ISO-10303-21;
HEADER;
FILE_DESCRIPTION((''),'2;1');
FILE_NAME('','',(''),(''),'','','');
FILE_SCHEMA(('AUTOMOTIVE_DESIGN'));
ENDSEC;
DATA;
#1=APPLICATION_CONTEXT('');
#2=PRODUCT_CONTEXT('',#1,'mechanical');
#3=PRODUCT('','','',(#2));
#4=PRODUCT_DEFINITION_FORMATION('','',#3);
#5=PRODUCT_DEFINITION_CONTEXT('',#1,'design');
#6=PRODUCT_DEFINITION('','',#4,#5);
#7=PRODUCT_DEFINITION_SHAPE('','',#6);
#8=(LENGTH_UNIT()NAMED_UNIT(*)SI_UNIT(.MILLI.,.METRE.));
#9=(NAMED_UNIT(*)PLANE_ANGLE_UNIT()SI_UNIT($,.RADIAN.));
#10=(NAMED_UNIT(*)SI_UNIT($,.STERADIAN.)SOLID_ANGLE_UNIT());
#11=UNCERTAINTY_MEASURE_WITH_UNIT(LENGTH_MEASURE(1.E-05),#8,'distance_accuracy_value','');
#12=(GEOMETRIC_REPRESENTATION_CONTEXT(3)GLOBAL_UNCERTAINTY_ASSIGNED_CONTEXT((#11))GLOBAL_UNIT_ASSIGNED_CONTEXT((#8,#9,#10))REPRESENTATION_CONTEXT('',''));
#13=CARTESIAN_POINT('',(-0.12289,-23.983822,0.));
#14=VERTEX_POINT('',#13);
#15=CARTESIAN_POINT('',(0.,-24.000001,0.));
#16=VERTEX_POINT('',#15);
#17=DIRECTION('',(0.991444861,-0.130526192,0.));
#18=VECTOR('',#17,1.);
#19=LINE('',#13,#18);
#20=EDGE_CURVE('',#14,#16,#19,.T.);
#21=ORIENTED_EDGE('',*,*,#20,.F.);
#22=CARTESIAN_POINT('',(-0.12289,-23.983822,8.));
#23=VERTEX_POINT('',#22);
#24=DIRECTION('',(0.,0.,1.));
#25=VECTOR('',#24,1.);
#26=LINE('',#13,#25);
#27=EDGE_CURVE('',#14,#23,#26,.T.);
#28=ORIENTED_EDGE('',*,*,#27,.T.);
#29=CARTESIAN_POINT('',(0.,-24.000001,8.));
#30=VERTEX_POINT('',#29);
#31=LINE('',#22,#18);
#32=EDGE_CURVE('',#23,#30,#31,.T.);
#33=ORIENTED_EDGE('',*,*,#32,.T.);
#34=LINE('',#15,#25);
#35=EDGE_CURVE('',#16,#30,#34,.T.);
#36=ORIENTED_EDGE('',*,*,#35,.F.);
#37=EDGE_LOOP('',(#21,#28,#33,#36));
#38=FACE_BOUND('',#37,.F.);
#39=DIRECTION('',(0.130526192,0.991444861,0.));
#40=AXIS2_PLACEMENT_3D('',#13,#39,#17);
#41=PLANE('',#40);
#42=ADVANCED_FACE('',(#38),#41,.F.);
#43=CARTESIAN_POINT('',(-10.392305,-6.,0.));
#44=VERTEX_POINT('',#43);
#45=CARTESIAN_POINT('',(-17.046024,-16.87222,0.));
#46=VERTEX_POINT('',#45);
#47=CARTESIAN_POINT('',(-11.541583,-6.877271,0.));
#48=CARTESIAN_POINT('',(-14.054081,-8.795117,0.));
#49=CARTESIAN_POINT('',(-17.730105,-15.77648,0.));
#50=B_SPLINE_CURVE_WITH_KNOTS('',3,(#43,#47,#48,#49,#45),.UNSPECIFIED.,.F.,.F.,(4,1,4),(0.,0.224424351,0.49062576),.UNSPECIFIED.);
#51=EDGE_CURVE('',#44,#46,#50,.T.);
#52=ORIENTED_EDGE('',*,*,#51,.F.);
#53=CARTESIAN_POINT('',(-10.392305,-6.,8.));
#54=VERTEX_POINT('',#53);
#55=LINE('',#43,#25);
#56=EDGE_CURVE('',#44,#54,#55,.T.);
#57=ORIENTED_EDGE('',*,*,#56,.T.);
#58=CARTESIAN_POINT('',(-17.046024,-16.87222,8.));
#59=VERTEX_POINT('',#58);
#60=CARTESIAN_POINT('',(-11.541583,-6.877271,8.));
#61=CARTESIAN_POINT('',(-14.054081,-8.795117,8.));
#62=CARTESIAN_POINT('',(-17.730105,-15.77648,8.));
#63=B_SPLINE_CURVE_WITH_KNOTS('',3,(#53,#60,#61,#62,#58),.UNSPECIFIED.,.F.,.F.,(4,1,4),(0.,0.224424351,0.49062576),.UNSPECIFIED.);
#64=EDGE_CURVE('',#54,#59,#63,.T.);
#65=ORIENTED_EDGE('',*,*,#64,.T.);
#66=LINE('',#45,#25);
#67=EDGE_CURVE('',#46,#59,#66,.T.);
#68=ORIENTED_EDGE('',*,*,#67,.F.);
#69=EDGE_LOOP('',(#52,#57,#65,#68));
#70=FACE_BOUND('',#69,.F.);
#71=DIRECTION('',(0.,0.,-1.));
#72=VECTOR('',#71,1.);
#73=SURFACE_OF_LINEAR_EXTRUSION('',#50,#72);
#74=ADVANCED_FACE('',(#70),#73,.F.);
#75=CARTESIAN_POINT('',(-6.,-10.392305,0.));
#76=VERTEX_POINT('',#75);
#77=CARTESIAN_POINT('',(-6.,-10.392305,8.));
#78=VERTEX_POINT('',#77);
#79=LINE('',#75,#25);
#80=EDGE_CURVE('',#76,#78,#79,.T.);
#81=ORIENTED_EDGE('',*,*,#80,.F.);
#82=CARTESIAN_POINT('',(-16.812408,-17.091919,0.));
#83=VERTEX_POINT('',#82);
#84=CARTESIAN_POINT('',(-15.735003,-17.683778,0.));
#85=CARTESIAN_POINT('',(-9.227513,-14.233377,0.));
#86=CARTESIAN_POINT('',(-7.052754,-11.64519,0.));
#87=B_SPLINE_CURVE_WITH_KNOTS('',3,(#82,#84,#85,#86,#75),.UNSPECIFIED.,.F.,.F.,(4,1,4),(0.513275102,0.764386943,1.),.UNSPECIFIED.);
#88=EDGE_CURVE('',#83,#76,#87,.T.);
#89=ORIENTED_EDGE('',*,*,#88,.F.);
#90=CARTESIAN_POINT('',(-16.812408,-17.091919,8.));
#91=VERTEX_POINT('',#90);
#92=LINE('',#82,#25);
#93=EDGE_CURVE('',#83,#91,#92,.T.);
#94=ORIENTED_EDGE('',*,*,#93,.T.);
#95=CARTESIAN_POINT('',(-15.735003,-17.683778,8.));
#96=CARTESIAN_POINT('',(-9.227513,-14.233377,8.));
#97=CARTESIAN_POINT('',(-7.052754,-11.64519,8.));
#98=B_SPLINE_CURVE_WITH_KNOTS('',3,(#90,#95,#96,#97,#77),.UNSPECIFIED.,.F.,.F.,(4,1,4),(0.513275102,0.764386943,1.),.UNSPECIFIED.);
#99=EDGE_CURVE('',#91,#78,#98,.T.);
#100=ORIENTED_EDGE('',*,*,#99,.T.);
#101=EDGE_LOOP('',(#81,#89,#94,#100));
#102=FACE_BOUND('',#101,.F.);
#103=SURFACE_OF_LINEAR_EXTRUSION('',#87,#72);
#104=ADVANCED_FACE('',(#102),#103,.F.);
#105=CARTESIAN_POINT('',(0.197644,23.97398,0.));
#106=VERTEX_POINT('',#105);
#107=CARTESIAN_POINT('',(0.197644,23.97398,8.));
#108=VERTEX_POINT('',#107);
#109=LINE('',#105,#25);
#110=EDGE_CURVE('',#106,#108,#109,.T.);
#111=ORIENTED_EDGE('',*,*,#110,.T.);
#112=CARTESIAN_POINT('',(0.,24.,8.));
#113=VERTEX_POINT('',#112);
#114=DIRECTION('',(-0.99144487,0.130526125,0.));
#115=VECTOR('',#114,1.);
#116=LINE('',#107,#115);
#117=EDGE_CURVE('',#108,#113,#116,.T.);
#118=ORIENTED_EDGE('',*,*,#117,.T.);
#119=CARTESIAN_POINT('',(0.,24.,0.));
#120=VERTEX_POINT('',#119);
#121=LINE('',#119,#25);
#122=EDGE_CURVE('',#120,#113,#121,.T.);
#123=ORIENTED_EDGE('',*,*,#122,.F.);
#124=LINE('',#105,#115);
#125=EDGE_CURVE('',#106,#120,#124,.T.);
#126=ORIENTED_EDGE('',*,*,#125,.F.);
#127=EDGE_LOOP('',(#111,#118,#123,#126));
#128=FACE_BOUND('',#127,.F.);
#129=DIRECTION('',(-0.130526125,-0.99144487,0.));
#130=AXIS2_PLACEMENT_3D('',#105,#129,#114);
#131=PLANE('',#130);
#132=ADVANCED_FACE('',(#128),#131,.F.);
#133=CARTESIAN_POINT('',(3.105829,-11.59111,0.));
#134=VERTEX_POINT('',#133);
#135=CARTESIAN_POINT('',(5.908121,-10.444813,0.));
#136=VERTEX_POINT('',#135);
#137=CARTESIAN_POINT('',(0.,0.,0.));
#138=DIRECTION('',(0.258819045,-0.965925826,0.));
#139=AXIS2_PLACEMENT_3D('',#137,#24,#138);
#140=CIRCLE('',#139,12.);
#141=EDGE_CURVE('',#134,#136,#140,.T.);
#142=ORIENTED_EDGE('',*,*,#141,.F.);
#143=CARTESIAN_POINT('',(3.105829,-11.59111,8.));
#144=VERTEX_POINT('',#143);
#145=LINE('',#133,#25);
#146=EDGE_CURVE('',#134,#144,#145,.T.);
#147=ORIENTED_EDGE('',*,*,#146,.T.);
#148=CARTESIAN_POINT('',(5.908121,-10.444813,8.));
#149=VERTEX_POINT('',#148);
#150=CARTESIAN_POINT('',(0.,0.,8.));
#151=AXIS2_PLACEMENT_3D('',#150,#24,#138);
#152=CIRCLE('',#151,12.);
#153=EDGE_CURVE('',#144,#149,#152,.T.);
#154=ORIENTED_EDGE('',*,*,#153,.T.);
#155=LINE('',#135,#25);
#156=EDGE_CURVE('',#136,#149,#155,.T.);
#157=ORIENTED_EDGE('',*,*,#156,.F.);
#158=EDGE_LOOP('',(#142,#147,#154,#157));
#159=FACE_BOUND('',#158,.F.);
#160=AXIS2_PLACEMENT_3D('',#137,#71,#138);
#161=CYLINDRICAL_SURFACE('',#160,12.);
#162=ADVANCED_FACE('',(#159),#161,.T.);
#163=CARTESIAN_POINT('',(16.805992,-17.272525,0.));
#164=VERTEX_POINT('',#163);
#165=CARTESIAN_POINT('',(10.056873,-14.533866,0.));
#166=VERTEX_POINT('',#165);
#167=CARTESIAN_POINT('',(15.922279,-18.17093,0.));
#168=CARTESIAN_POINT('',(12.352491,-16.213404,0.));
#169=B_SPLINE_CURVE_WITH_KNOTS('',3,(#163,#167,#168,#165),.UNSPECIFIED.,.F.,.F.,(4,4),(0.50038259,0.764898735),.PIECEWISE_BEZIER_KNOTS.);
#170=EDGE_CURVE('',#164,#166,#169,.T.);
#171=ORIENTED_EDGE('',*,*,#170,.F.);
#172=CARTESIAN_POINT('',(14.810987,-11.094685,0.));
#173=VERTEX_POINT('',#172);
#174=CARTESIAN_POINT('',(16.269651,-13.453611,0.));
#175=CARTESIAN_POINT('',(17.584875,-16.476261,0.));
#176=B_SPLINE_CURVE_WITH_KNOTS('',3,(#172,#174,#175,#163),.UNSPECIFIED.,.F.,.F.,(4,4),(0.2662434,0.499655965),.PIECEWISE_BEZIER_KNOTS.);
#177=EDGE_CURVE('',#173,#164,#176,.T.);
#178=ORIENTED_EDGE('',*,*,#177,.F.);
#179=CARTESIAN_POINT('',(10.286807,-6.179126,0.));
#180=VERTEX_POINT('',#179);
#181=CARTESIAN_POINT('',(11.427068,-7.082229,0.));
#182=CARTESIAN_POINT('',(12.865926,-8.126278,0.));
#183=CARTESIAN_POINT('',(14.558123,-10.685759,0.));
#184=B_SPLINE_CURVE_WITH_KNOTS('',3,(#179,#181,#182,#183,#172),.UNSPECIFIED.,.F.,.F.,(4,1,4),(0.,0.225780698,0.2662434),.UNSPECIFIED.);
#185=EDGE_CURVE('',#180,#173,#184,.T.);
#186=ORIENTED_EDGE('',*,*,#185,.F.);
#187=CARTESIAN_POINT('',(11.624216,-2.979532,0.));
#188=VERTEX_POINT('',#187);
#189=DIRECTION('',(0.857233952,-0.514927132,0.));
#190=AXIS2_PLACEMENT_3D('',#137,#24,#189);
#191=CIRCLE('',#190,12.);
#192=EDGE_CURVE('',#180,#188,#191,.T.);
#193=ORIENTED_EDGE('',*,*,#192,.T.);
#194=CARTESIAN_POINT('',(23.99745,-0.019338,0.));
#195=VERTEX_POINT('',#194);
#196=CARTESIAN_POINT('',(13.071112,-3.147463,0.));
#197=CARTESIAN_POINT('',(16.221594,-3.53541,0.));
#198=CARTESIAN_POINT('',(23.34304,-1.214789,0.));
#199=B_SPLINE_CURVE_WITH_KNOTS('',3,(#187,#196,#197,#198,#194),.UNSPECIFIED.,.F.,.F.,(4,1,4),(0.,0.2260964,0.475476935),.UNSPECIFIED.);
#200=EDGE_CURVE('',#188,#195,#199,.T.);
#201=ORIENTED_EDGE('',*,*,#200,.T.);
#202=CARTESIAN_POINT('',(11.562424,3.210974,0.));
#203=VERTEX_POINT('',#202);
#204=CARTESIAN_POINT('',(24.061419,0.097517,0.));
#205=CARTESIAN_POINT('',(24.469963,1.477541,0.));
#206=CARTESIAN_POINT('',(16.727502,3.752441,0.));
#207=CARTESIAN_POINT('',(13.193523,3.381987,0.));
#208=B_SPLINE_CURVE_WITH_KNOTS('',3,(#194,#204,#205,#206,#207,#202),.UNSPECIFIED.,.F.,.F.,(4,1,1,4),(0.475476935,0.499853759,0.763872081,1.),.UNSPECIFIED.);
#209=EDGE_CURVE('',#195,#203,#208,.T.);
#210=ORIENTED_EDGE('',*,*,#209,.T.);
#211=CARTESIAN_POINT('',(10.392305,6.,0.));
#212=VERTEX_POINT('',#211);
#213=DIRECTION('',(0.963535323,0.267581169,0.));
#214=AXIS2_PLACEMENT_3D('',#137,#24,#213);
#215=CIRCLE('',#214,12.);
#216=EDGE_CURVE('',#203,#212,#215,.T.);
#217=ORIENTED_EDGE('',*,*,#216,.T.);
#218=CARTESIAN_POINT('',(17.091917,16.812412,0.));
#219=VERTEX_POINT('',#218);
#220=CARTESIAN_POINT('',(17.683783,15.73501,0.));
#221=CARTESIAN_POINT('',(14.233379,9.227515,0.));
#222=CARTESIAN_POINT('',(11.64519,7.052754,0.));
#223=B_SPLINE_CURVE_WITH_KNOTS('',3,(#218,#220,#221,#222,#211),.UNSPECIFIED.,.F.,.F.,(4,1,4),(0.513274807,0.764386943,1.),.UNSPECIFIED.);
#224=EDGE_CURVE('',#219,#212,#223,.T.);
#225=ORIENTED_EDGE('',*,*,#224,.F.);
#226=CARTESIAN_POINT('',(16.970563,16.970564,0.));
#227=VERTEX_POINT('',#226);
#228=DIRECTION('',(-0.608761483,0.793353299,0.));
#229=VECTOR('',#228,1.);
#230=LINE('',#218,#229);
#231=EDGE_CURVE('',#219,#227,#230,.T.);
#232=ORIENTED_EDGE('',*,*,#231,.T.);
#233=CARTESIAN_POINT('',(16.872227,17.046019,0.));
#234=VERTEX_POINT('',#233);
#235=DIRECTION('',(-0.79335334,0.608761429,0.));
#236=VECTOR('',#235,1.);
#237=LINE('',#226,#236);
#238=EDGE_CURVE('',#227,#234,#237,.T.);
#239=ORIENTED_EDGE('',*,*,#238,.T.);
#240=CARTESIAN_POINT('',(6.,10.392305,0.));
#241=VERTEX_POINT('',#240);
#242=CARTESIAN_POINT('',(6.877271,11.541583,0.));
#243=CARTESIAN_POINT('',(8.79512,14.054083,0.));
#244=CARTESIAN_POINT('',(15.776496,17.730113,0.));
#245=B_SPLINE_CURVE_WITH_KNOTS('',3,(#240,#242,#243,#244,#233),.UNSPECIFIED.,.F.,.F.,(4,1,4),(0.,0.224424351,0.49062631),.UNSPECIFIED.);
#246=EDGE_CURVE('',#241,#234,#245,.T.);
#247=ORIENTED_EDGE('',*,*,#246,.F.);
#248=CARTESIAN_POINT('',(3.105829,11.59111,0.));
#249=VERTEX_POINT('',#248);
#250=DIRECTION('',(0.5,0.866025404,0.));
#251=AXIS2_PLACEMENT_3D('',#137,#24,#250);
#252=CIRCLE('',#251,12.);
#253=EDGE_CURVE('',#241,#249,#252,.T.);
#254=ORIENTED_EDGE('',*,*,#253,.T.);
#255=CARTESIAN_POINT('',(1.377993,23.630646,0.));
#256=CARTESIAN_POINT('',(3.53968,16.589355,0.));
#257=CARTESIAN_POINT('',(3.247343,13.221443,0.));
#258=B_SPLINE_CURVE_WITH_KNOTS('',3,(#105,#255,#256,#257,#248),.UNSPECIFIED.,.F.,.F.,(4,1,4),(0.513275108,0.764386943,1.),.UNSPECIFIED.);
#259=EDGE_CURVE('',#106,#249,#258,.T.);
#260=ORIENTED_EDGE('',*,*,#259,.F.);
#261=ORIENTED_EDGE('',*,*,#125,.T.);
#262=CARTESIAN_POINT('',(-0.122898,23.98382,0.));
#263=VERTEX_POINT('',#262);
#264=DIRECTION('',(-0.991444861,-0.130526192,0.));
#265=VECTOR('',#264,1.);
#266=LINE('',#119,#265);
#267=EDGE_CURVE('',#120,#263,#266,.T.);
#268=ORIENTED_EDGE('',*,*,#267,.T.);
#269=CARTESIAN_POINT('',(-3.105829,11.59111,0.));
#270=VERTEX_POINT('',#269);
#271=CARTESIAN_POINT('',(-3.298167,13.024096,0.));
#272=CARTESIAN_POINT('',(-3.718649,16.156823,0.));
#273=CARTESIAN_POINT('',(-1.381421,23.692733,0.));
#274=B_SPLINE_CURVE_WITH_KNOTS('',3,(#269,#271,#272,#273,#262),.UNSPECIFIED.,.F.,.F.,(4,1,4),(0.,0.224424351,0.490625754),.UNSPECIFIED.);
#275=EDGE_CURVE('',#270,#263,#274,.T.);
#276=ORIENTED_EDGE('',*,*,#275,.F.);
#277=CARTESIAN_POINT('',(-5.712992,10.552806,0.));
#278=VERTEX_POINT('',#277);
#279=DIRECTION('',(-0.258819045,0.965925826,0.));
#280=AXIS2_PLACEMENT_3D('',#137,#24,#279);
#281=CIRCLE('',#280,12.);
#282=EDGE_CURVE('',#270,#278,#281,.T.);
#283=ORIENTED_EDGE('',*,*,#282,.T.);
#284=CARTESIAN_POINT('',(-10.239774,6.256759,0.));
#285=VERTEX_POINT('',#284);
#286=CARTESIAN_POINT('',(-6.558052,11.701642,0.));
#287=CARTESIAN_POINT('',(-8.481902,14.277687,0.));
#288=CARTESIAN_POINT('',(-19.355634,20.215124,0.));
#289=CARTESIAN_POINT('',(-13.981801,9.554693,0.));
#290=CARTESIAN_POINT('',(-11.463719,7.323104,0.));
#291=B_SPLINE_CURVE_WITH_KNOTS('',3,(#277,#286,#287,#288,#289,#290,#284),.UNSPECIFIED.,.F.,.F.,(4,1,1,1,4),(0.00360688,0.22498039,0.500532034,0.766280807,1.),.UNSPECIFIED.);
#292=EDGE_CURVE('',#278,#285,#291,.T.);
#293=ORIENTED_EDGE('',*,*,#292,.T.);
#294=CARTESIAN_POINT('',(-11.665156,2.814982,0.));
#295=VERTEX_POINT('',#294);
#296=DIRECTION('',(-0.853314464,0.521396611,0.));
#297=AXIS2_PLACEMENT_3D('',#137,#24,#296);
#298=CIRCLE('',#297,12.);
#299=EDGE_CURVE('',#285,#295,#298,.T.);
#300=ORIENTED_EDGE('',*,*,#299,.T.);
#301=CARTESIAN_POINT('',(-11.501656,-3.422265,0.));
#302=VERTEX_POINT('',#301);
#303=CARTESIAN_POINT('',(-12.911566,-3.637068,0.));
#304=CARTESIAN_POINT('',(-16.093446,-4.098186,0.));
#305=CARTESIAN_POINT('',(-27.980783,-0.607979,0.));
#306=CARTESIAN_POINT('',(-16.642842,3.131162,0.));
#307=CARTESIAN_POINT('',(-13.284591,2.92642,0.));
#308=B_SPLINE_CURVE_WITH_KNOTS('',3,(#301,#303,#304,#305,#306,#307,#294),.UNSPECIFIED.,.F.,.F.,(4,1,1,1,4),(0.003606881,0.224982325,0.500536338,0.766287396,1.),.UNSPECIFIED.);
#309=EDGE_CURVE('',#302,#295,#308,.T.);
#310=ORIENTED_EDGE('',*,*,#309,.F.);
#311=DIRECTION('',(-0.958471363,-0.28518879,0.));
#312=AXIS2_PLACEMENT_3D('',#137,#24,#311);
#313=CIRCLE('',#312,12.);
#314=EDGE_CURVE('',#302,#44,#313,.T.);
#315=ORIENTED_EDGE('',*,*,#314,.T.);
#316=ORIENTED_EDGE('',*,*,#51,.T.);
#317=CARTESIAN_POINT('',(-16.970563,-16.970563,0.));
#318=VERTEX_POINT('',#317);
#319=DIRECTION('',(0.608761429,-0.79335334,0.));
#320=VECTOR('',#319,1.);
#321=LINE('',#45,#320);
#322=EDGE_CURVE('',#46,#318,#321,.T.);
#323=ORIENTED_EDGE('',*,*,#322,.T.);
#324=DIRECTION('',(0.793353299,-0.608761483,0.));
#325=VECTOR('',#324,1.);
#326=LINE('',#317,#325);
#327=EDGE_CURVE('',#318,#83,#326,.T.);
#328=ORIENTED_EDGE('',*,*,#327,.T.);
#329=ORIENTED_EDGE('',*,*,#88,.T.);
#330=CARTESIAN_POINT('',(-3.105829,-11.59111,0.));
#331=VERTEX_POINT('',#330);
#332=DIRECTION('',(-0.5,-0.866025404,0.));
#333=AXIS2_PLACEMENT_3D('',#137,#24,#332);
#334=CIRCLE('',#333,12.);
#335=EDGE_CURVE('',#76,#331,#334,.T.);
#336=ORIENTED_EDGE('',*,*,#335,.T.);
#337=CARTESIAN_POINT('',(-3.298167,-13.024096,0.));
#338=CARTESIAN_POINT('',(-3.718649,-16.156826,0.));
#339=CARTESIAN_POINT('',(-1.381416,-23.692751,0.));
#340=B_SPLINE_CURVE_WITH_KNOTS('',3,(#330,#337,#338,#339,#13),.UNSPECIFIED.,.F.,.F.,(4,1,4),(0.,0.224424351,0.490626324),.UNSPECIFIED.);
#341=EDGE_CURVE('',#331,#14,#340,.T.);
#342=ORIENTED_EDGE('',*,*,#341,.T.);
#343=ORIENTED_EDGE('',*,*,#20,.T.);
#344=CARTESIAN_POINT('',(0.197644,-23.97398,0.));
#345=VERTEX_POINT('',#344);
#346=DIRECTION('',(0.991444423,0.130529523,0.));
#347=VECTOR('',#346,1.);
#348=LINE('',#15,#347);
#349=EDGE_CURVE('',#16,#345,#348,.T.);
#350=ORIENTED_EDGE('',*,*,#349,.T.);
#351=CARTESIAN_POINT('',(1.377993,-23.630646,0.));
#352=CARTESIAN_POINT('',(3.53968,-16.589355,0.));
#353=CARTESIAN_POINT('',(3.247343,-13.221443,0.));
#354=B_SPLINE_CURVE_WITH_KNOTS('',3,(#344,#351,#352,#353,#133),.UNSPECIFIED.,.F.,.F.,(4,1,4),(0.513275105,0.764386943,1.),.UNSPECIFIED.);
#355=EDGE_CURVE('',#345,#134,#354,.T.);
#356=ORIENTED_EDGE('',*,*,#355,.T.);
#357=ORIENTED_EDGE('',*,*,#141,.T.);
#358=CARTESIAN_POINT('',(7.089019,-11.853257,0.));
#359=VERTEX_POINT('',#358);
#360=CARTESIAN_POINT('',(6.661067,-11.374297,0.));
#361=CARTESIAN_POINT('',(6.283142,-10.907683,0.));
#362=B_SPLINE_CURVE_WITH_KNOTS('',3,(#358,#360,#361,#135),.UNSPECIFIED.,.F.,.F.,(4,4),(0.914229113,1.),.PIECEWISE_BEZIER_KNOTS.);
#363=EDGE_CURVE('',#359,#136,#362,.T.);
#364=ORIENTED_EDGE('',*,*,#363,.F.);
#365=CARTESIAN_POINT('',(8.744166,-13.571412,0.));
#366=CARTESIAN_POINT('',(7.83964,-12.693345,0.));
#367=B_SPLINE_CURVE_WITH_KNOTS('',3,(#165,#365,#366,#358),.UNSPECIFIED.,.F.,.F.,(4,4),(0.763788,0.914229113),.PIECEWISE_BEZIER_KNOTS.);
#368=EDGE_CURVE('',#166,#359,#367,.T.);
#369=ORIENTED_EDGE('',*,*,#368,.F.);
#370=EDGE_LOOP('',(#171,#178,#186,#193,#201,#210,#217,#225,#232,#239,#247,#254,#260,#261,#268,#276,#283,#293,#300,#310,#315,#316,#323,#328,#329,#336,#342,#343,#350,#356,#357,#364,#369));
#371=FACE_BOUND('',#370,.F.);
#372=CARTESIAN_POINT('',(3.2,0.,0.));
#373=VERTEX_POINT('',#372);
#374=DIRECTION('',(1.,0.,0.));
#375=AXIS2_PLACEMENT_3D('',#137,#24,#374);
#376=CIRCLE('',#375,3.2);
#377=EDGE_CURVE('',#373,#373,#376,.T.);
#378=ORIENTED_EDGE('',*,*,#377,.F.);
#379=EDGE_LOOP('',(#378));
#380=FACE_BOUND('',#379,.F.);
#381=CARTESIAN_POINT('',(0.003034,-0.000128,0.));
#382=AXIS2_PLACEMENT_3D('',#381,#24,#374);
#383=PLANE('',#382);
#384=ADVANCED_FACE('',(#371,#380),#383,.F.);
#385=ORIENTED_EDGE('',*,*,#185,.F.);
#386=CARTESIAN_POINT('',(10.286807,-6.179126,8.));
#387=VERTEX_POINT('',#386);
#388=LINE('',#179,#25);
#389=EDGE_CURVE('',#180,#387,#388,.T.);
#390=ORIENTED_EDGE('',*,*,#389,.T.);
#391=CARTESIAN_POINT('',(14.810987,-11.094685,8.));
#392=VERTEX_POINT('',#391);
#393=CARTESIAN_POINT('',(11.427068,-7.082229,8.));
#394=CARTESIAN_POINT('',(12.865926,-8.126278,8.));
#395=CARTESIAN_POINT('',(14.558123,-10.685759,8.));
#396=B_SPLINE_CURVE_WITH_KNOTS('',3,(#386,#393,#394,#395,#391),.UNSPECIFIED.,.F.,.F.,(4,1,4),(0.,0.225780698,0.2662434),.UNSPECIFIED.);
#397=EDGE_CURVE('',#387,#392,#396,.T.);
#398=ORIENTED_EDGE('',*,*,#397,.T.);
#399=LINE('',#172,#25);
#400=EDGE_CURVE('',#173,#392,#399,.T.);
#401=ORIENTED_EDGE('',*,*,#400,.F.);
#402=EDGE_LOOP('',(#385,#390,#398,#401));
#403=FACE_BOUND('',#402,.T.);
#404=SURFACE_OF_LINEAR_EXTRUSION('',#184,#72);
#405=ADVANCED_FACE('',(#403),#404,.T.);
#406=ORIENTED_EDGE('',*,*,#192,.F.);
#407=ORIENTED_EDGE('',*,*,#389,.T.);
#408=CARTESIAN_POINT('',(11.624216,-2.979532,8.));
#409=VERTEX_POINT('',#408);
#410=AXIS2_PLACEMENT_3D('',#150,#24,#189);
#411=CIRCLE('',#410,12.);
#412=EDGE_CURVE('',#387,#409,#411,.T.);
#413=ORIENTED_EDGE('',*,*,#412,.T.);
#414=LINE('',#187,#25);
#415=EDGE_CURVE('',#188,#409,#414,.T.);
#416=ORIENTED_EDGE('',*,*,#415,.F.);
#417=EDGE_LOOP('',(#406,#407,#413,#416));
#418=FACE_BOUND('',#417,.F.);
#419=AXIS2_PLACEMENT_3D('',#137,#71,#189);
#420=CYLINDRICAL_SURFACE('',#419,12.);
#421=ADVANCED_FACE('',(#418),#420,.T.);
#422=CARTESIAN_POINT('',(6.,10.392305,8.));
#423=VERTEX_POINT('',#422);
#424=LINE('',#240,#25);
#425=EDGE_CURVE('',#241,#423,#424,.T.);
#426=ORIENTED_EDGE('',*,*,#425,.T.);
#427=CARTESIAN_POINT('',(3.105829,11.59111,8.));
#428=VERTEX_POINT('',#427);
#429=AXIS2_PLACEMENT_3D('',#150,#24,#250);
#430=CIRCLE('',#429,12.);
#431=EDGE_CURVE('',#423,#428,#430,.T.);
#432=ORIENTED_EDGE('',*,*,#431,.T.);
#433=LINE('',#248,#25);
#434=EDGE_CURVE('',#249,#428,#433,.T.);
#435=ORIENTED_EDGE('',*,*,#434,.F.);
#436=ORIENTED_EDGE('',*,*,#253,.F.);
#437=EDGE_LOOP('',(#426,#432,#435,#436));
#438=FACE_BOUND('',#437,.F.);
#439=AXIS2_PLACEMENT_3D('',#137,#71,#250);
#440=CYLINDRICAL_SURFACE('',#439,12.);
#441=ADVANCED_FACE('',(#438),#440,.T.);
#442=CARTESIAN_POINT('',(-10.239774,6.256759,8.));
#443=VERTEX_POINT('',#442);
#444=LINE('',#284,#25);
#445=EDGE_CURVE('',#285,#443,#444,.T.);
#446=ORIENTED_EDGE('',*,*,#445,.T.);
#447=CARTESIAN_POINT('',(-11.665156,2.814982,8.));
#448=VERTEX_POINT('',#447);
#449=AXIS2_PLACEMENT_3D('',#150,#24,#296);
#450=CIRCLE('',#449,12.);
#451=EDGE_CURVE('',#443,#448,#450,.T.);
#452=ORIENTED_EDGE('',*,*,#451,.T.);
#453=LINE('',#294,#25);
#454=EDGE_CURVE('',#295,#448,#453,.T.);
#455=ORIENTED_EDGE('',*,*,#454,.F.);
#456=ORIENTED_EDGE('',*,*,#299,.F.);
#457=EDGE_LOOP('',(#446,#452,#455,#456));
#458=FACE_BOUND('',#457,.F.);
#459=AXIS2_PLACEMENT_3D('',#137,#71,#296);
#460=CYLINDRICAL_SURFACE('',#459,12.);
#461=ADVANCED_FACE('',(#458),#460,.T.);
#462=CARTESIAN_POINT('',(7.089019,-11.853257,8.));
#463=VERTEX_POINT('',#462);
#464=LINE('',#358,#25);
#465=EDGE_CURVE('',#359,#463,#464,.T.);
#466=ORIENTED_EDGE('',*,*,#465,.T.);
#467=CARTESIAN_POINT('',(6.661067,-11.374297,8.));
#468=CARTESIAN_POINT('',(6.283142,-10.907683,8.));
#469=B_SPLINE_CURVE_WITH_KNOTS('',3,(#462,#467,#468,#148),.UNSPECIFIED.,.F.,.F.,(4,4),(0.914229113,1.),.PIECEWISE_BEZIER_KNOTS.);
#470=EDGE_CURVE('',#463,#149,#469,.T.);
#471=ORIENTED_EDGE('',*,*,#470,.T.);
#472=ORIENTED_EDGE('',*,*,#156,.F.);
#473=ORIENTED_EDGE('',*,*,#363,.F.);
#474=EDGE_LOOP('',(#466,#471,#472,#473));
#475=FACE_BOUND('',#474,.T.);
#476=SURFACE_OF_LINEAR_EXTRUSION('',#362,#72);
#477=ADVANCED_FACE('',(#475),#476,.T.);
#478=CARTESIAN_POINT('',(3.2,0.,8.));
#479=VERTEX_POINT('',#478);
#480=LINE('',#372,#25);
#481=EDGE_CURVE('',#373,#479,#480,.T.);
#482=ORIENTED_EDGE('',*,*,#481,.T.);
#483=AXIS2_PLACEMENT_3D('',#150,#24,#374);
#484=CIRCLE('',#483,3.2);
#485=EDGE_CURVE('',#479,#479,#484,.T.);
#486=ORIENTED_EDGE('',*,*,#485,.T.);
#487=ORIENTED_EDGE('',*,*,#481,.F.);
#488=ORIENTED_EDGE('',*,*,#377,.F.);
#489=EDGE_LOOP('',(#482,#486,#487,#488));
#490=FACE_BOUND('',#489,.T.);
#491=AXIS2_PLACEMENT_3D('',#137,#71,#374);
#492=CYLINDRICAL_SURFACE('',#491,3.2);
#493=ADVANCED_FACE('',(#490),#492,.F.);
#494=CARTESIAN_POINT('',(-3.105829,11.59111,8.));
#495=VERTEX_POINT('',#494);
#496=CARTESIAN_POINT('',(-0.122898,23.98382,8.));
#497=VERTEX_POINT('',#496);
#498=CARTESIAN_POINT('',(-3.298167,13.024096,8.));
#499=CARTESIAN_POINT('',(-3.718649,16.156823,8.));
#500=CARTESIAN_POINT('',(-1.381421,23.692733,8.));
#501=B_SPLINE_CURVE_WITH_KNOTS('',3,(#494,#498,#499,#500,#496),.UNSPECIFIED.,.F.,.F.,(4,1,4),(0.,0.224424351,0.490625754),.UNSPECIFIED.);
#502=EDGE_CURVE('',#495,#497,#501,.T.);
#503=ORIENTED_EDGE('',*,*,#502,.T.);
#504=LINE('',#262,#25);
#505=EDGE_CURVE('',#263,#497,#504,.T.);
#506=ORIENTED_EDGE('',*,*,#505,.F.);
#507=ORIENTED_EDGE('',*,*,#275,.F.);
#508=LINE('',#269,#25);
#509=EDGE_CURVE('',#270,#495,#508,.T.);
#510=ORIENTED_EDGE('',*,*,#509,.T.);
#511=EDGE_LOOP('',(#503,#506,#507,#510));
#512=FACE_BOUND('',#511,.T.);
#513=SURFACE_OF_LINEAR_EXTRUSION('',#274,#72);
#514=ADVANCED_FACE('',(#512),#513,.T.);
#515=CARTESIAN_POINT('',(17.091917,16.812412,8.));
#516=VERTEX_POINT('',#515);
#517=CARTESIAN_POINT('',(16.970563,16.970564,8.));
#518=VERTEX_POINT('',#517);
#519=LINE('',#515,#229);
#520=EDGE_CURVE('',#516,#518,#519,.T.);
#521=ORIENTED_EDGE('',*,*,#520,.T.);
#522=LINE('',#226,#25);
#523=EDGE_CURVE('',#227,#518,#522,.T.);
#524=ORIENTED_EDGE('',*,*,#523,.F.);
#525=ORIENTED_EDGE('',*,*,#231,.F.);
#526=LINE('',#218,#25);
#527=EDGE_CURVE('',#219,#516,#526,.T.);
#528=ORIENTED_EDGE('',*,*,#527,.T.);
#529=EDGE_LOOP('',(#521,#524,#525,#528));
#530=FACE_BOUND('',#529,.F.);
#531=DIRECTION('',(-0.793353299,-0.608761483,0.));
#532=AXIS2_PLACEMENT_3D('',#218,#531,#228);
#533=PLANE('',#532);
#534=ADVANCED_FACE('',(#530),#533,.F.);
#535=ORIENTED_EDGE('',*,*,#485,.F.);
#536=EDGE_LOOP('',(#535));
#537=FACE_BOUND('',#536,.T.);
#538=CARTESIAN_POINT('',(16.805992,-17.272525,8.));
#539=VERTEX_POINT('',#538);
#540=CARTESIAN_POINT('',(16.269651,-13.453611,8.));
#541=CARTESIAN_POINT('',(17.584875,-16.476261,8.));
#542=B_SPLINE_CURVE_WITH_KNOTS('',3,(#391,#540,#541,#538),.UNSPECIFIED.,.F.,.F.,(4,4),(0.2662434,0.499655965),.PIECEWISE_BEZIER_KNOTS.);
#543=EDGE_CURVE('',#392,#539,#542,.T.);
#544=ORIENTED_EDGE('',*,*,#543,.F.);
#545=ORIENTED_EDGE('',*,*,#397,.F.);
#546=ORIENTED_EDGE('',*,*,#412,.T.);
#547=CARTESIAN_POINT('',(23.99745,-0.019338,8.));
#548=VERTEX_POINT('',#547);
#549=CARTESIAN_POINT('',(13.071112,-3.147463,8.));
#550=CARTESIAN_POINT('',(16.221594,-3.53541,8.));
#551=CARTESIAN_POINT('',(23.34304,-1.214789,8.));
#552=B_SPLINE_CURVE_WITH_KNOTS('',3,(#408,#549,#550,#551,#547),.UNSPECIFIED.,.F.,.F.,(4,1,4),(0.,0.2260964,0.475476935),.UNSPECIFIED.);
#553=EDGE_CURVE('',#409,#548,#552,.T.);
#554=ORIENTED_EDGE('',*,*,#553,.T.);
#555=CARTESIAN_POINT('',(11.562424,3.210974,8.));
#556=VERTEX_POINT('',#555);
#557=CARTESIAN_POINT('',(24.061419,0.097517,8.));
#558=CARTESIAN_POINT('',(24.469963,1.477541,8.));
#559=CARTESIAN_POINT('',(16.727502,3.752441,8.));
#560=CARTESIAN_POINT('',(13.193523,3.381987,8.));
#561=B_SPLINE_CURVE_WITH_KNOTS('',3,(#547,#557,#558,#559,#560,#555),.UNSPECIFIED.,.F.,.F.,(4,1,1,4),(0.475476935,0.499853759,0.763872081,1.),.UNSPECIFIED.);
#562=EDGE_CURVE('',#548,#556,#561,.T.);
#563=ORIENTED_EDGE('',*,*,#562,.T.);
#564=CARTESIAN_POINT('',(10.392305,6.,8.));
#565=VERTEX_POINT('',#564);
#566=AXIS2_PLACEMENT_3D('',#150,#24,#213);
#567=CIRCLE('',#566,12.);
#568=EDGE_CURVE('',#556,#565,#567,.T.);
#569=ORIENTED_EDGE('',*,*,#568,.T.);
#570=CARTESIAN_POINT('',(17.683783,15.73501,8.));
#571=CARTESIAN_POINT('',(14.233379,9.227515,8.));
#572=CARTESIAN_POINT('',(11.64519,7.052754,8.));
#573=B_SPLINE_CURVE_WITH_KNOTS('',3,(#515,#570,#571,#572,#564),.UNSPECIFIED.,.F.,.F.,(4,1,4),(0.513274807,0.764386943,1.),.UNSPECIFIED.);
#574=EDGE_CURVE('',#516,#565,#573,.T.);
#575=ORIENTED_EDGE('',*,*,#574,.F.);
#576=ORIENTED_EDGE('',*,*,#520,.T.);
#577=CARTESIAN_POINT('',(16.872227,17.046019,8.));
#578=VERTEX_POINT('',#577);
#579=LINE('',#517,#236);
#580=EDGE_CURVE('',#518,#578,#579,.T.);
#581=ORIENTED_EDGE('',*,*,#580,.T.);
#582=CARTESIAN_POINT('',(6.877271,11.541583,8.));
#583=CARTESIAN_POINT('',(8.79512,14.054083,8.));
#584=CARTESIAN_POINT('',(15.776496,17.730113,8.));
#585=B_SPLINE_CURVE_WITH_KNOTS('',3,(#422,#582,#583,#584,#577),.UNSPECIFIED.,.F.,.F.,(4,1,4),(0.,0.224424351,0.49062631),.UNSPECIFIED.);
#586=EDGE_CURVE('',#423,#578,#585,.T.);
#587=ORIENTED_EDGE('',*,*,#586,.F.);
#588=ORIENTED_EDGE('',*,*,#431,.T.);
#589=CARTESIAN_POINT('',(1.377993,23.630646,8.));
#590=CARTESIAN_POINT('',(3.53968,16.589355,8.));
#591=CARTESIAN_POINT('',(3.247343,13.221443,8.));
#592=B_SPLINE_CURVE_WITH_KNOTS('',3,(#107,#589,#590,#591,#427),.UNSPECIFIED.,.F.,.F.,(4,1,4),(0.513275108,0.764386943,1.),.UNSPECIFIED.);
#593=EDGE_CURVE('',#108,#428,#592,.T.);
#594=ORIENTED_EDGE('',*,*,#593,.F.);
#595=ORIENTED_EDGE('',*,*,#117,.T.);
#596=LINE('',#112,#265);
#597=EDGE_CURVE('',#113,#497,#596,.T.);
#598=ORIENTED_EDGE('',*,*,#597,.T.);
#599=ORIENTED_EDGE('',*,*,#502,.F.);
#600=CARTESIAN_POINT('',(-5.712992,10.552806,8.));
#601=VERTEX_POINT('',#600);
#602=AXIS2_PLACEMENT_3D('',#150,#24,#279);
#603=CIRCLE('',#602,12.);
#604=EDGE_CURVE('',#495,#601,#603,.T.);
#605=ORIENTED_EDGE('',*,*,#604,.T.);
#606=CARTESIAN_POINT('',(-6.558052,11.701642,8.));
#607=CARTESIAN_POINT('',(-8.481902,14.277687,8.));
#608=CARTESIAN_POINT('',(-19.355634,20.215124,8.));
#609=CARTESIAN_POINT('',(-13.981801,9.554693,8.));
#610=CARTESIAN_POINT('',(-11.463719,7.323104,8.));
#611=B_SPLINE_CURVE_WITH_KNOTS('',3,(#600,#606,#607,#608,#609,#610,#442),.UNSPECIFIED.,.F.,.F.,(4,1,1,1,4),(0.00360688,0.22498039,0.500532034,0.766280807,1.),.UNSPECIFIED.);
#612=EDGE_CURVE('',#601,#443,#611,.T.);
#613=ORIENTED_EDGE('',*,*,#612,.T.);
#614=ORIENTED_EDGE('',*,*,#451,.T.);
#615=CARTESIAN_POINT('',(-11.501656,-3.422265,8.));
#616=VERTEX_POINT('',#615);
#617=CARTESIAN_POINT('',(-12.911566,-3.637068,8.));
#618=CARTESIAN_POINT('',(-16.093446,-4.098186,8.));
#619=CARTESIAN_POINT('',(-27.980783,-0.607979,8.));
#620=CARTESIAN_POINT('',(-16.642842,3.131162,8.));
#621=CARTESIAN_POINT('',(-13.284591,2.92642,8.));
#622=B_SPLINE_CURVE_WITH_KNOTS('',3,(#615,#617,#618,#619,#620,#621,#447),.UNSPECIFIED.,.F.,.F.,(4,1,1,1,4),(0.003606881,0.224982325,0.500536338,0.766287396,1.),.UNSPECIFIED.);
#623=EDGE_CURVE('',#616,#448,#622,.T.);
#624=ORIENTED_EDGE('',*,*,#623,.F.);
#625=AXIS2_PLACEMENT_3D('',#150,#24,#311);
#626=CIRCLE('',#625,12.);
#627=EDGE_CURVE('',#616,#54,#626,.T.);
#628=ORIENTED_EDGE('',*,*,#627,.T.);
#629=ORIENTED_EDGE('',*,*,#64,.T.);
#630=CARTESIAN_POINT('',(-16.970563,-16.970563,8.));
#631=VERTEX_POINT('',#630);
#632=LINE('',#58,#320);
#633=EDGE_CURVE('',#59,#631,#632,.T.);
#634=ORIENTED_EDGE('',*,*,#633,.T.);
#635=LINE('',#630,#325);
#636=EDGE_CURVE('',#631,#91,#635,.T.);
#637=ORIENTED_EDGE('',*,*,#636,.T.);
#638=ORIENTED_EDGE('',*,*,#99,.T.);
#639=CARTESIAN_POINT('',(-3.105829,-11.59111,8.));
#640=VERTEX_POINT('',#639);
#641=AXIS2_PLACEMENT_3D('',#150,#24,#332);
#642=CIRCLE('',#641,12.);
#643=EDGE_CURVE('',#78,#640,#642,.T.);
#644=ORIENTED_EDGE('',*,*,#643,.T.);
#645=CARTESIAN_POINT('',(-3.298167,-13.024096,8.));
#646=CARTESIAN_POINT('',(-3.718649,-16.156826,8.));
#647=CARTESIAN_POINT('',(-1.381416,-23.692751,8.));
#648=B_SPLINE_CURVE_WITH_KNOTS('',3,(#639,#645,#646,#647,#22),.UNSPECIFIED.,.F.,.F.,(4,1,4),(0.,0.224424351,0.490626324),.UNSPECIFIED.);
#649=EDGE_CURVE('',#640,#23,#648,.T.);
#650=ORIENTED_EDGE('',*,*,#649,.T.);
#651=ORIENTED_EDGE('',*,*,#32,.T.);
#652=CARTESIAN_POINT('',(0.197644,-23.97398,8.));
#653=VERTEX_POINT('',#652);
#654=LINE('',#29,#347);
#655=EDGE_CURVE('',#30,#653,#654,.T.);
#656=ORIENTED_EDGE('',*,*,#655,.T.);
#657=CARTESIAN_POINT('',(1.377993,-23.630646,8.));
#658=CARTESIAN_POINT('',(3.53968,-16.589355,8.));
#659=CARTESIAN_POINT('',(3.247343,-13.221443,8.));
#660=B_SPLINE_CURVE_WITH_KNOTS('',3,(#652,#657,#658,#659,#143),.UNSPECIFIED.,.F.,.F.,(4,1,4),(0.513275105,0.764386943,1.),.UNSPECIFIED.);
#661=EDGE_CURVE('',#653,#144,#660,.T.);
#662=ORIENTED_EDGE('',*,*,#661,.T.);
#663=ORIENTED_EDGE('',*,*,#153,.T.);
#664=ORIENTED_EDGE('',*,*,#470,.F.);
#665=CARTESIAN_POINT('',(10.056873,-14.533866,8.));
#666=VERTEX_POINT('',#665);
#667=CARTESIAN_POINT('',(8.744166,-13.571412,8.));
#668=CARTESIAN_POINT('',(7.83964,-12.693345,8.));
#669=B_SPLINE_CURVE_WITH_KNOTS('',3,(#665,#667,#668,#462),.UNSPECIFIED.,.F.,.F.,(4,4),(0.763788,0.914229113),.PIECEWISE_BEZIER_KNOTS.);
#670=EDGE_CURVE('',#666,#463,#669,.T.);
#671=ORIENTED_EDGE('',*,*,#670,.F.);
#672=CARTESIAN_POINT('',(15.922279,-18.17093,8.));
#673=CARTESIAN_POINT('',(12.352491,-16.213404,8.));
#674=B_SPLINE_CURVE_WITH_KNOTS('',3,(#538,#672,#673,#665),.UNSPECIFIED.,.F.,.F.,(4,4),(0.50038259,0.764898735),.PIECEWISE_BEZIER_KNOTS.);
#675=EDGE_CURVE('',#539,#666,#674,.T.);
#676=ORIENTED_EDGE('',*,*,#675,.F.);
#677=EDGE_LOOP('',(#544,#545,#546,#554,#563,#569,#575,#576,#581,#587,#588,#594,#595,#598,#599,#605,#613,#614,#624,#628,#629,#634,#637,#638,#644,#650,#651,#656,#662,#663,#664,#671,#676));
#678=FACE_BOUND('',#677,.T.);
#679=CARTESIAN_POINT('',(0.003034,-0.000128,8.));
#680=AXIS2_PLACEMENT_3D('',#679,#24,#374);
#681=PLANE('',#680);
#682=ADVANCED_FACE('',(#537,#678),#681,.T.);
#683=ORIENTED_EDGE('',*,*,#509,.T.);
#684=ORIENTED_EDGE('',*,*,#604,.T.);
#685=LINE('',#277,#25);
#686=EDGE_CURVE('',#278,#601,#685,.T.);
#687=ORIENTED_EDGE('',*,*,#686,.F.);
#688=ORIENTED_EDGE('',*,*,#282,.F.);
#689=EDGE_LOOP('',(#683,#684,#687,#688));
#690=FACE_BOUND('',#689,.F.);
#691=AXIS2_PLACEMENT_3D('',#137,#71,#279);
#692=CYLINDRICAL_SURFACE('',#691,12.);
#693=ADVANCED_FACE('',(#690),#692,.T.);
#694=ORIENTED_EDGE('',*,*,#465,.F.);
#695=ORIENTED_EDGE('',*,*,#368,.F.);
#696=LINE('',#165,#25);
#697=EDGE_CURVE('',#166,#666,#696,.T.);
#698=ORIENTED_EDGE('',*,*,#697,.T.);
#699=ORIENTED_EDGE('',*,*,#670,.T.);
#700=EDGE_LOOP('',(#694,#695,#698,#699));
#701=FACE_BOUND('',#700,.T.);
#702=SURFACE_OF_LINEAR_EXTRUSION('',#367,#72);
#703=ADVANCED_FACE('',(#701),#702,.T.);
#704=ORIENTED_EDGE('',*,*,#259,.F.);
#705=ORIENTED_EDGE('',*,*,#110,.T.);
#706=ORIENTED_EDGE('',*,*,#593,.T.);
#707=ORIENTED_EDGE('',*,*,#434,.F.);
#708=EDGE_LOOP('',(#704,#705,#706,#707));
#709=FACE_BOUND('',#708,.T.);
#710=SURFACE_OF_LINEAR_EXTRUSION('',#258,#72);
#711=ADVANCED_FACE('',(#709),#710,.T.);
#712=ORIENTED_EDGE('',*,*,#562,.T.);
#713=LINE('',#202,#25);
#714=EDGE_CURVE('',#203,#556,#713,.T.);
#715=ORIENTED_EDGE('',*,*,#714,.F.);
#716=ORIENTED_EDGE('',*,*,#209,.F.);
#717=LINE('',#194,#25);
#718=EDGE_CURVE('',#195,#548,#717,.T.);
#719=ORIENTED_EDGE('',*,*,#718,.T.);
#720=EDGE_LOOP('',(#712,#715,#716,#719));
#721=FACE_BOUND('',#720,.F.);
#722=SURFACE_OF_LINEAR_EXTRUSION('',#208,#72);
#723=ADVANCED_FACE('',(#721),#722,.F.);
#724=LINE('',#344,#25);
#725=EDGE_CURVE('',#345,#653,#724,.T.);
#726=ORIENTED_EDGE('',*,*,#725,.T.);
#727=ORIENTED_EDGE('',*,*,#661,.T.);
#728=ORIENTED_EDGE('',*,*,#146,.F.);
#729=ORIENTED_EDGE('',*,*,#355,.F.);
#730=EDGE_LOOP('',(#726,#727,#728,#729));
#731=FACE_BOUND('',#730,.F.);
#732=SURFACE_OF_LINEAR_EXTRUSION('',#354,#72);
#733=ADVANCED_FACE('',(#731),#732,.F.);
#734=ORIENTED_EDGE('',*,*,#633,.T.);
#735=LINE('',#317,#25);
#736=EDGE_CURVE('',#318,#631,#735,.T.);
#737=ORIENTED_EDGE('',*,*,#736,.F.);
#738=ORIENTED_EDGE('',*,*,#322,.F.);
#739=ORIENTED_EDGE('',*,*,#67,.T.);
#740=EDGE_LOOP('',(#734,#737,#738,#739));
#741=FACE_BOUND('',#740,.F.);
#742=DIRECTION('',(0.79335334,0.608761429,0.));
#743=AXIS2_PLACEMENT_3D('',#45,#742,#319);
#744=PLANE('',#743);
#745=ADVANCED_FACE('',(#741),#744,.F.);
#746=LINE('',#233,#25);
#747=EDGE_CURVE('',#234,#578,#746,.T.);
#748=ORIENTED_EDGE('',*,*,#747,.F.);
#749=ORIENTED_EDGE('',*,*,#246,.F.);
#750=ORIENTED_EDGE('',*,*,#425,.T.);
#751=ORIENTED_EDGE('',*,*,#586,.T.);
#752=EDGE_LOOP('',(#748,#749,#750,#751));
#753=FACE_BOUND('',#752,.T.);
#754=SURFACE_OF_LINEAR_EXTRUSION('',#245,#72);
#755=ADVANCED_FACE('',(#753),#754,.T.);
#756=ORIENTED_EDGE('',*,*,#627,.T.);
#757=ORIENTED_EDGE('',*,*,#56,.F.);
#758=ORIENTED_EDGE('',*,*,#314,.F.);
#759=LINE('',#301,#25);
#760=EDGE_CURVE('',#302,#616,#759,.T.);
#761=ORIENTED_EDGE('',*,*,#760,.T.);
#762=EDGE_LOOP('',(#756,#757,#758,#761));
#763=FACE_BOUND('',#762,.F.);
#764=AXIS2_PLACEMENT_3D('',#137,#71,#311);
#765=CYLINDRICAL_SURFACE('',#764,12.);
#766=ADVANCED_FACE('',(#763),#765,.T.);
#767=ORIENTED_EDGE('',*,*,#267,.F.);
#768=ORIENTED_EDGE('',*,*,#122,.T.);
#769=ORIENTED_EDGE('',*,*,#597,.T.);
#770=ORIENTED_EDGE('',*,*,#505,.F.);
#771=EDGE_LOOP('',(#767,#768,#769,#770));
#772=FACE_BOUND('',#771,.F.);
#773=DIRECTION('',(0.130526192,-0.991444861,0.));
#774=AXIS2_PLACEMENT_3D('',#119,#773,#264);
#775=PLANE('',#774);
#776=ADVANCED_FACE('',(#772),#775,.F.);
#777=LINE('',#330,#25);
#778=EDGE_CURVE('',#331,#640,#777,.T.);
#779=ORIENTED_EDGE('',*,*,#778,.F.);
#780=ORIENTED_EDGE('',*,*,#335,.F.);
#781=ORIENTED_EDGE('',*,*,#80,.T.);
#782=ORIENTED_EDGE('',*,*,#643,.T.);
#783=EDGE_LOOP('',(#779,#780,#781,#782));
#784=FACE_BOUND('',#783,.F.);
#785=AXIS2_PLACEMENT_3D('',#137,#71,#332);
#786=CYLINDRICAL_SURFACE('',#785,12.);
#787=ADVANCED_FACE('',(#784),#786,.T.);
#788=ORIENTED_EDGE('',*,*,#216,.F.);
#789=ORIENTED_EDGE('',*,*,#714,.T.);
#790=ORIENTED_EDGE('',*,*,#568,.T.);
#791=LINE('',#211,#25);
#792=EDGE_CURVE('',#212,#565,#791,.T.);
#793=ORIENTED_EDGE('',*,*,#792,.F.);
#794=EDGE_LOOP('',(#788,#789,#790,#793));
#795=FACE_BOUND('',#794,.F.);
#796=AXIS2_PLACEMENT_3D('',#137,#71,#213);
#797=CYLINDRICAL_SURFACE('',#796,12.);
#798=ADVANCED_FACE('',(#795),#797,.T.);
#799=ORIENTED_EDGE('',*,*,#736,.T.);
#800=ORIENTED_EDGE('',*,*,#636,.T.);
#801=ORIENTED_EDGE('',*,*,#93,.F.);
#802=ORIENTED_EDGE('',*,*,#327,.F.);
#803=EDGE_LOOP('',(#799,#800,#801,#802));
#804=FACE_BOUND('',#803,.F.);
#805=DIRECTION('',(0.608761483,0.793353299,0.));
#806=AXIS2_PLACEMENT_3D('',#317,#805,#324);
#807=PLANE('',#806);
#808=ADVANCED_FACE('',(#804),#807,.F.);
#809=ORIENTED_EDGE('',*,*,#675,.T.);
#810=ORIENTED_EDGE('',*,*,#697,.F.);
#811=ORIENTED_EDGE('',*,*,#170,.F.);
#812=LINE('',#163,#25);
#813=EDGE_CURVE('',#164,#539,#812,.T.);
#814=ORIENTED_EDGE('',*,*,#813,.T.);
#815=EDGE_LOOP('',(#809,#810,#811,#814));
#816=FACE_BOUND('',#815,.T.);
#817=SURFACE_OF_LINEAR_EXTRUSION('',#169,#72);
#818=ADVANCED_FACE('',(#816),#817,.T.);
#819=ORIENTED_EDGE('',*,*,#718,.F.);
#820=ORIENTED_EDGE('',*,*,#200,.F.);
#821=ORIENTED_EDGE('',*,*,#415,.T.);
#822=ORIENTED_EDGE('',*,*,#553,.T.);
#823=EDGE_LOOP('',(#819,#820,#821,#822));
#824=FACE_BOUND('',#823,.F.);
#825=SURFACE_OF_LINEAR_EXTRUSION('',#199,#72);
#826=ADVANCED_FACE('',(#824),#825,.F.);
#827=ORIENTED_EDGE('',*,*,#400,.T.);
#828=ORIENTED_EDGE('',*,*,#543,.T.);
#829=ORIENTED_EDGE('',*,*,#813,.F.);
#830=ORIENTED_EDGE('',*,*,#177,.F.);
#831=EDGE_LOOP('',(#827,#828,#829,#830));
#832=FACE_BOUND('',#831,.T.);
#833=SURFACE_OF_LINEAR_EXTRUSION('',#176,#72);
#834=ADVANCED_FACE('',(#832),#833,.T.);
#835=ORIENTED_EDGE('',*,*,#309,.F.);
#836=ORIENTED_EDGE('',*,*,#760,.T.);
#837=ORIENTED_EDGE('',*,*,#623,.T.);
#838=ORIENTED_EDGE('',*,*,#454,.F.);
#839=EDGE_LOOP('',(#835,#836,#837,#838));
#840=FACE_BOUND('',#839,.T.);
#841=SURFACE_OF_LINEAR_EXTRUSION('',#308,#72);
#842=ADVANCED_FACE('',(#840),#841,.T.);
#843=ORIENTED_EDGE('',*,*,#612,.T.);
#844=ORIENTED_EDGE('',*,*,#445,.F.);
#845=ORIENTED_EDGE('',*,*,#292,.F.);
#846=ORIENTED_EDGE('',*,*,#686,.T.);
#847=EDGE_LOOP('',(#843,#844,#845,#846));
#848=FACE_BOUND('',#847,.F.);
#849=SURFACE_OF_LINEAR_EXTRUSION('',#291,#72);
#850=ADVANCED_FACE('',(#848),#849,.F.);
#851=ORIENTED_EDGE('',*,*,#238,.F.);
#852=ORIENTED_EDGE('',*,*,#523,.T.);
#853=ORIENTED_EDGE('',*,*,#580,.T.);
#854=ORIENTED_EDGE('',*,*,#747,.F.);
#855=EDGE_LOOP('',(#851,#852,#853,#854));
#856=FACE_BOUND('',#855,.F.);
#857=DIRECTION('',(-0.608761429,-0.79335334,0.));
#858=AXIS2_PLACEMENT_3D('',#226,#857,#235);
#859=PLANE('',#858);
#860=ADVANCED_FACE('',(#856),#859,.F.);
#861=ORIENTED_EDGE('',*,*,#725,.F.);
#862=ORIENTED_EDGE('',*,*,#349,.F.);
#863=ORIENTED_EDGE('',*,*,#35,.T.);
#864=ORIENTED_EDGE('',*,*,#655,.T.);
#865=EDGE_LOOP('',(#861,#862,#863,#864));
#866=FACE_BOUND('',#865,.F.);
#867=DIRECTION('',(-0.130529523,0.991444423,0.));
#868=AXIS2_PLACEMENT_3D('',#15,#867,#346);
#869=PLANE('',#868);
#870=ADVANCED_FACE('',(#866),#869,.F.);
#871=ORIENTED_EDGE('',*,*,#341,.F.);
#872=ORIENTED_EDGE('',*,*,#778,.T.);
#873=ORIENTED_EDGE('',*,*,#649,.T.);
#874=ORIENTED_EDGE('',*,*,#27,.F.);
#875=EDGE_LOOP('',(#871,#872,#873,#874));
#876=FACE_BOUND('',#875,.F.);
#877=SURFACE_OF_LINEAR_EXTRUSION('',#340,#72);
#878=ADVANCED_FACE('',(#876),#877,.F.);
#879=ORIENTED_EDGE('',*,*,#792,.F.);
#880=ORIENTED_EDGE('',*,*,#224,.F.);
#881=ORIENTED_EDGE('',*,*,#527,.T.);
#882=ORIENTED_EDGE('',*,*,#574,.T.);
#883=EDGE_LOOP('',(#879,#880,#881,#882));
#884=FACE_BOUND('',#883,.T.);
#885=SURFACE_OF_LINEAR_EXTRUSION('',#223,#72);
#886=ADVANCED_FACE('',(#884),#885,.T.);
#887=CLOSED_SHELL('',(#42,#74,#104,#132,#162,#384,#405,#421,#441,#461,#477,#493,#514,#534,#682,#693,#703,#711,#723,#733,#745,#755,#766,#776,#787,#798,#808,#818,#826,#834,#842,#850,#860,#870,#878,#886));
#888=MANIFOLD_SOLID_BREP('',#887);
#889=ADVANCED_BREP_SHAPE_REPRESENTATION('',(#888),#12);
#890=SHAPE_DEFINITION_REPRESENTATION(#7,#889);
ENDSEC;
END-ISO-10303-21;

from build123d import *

# Parameters (mm, degrees)
F1_DEPTH = 8
F2_R     = 3.2
F3_DEPTH = 8


with BuildPart() as f1:
    # F0 (on Top) → F1 (new body)
    with BuildSketch(Plane.XY):
        with BuildLine():
            ThreePointArc((11.624215505, -2.9795324957), (11.905683224, -1.5015681703), (12, 0))
            ThreePointArc((12, 0), (11.8901027427, 1.6203261298), (11.5624238722, 3.2109740268))
            ThreePointArc((11.5624238722, 3.2109740268), (11.0655860548, 4.6424998939), (10.3923048454, 6))
            ThreePointArc((10.3923048454, 6), (8.4852813742, 8.4852813742), (6, 10.3923048454))
            ThreePointArc((6, 10.3923048454), (4.5922011884, 11.0865543901), (3.1058285412, 11.5911099155))
            ThreePointArc((3.1058285412, 11.5911099155), (0, 12), (-3.1058285412, 11.5911099155))
            ThreePointArc((-3.1058285412, 11.5911099155), (-4.4398668676, 11.1484340693), (-5.7129920656, 10.5528063404))
            ThreePointArc((-5.7129920656, 10.5528063404), (-8.2605500909, 8.7042123248), (-10.2397735662, 6.25675933))
            ThreePointArc((-10.2397735662, 6.25675933), (-11.0868366823, 4.5915196156), (-11.6651564764, 2.8149821281))
            ThreePointArc((-11.6651564764, 2.8149821281), (-11.9958792367, -0.3144540322), (-11.5016563593, -3.4222654765))
            ThreePointArc((-11.5016563593, -3.4222654765), (-11.0225933032, -4.7436733522), (-10.3923048454, -6))
            ThreePointArc((-10.3923048454, -6), (-8.4852813742, -8.4852813742), (-6, -10.3923048454))
            ThreePointArc((-6, -10.3923048454), (-4.5922011884, -11.0865543901), (-3.1058285412, -11.5911099155))
            ThreePointArc((-3.1058285412, -11.5911099155), (0, -12), (3.1058285412, -11.5911099155))
            ThreePointArc((3.1058285412, -11.5911099155), (4.5432719603, -11.1066952733), (5.908120799, -10.4448125222))
            ThreePointArc((5.908120799, -10.4448125222), (8.3736459378, -8.5954670442), (10.2868074238, -6.1791255875))
            ThreePointArc((10.2868074238, -6.1791255875), (11.0717017858, -4.6278958032), (11.624215505, -2.9795324957))
        make_face()
        with BuildLine():
            ThreePointArc((11.5624238722, 3.2109740268), (11.8901027427, 1.6203261298), (12, 0))
            ThreePointArc((12, 0), (11.905683224, -1.5015681703), (11.624215505, -2.9795324957))
            add(Edge.make_bspline(
                [(11.624215505, -2.9795324957), (13.0711119373, -3.1474625085), (16.2215938385, -3.5354098028), (23.3430398074, -1.2147893088), (23.9974502807, -0.0193380728)],
                knots=[0, 0, 0, 0, 0.2260964002, 0.4754769354, 0.4754769354, 0.4754769354, 0.4754769354], degree=3))
            add(Edge.make_bspline(
                [(23.9974502807, -0.0193380728), (24.0614185813, 0.0975166951), (24.4699625306, 1.4775409149), (16.7275018212, 3.7524414462), (13.1935231835, 3.38198653), (11.5624238722, 3.2109740268)],
                knots=[0.4754769354, 0.4754769354, 0.4754769354, 0.4754769354, 0.4998537595, 0.763872081, 1, 1, 1, 1], degree=3))
        make_face()
        with BuildLine():
            ThreePointArc((6, 10.3923048454), (8.4852813742, 8.4852813742), (10.3923048454, 6))
            add(Edge.make_bspline(
                [(17.0919170156, 16.8124119108), (17.6837825023, 15.7350104435), (14.233378626, 9.2275146766), (11.6451903674, 7.0527541624), (10.3923048454, 6)],
                knots=[0.5132748066, 0.5132748066, 0.5132748066, 0.5132748066, 0.7643869429, 1, 1, 1, 1], degree=3))
            Line((17.0919170156, 16.8124119108), (16.9705629685, 16.9705635618))
            Line((16.9705629685, 16.9705635618), (16.8722269652, 17.046019431))
            add(Edge.make_bspline(
                [(6, 10.3923048454), (6.8772705646, 11.5415832454), (8.7951195762, 14.0540834163), (15.7764959515, 17.7301129885), (16.8722269652, 17.046019431)],
                knots=[0, 0, 0, 0, 0.2244243513, 0.4906263104, 0.4906263104, 0.4906263104, 0.4906263104], degree=3))
        make_face()
        with BuildLine():
            add(Edge.make_bspline(
                [(10.2868074238, -6.1791255875), (11.4270677634, -7.0822286351), (12.865925877, -8.1262783159), (14.5581234006, -10.6857585266), (14.8109868504, -11.0946847194)],
                knots=[0, 0, 0, 0, 0.2257806982, 0.2662434003, 0.2662434003, 0.2662434003, 0.2662434003], degree=3))
            ThreePointArc((10.2868074238, -6.1791255875), (8.3736459378, -8.5954670442), (5.908120799, -10.4448125222))
            add(Edge.make_bspline(
                [(7.0890186874, -11.8532565288), (6.6610674582, -11.3742973278), (6.2831423621, -10.9076828022), (5.908120799, -10.4448125222)],
                knots=[0.9142291133, 0.9142291133, 0.9142291133, 0.9142291133, 1, 1, 1, 1], degree=3))
            add(Edge.make_bspline(
                [(10.0568733092, -14.5338657298), (8.7441655127, -13.5714120718), (7.8396400458, -12.6933452624), (7.0890186874, -11.8532565288)],
                knots=[0.7637879996, 0.7637879996, 0.7637879996, 0.7637879996, 0.9142291133, 0.9142291133, 0.9142291133, 0.9142291133], degree=3))
            add(Edge.make_bspline(
                [(16.8059917931, -17.2725248103), (15.9222786098, -18.1709296498), (12.3524907209, -16.2134042482), (10.0568733491, -14.5338657589)],
                knots=[0.50038259, 0.50038259, 0.50038259, 0.50038259, 0.7648987347, 0.7648987347, 0.7648987347, 0.7648987347], degree=3))
            add(Edge.make_bspline(
                [(14.8109868504, -11.0946847194), (16.2696513341, -13.4536105124), (17.584874947, -16.4762614942), (16.8059918085, -17.2725247947)],
                knots=[0.2662434003, 0.2662434003, 0.2662434003, 0.2662434003, 0.4996559651, 0.4996559651, 0.4996559651, 0.4996559651], degree=3))
        make_face()
        with BuildLine():
            ThreePointArc((-3.1058285412, 11.5911099155), (0, 12), (3.1058285412, 11.5911099155))
            add(Edge.make_bspline(
                [(0.1976441975, 23.9739796614), (1.3779926102, 23.6306464061), (3.5396801636, 16.5893546652), (3.2473427828, 13.2214433713), (3.1058285412, 11.5911099155)],
                knots=[0.5132751075, 0.5132751075, 0.5132751075, 0.5132751075, 0.7643869429, 1, 1, 1, 1], degree=3))
            Line((0.1976441975, 23.9739796614), (0, 24))
            Line((0, 24), (-0.1228977193, 23.9838202083))
            add(Edge.make_bspline(
                [(-3.1058285412, 11.5911099155), (-3.2981671262, 13.0240964307), (-3.7186485167, 16.1568228295), (-1.3814211537, 23.6927333107), (-0.1228977193, 23.9838202083)],
                knots=[0, 0, 0, 0, 0.2244243513, 0.4906257542, 0.4906257542, 0.4906257542, 0.4906257542], degree=3))
        make_face()
        with BuildLine():
            add(Edge.make_bspline(
                [(0.1976441576, -23.973979673), (1.377992585, -23.6306464881), (3.5396801653, -16.5893546847), (3.2473427828, -13.2214433713), (3.1058285412, -11.5911099155)],
                knots=[0.5132751047, 0.5132751047, 0.5132751047, 0.5132751047, 0.7643869429, 1, 1, 1, 1], degree=3))
            ThreePointArc((3.1058285412, -11.5911099155), (0, -12), (-3.1058285412, -11.5911099155))
            add(Edge.make_bspline(
                [(-3.1058285412, -11.5911099155), (-3.2981671262, -13.0240964307), (-3.7186490047, -16.1568264655), (-1.3814157282, -23.6927508039), (-0.1228896428, -23.9838220763)],
                knots=[0, 0, 0, 0, 0.2244243513, 0.4906263236, 0.4906263236, 0.4906263236, 0.4906263236], degree=3))
            Line((-0.1228896428, -23.9838220763), (-4.148e-07, -24.0000007501))
            Line((-4.148e-07, -24.0000007501), (0.1976441576, -23.973979673))
        make_face()
        with BuildLine():
            ThreePointArc((-10.2397735662, 6.25675933), (-8.2605500909, 8.7042123248), (-5.7129920656, 10.5528063404))
            add(Edge.make_bspline(
                [(-5.7129920656, 10.5528063404), (-6.5580524828, 11.7016423726), (-8.4819019469, 14.2776873778), (-19.355634282, 20.2151241331), (-13.9818005189, 9.5546934951), (-11.4637192896, 7.323104241), (-10.2397735662, 6.25675933)],
                knots=[0.0036068796, 0.0036068796, 0.0036068796, 0.0036068796, 0.2249803905, 0.5005320337, 0.7662808066, 1, 1, 1, 1], degree=3))
        make_face()
        with BuildLine():
            add(Edge.make_bspline(
                [(-16.8124081104, -17.0919191033), (-15.7350025484, -17.6837783162), (-9.2275133574, -14.233377056), (-7.0527541624, -11.6451903674), (-6, -10.3923048454)],
                knots=[0.5132751019, 0.5132751019, 0.5132751019, 0.5132751019, 0.7643869429, 1, 1, 1, 1], degree=3))
            ThreePointArc((-6, -10.3923048454), (-8.4852813742, -8.4852813742), (-10.3923048454, -6))
            add(Edge.make_bspline(
                [(-10.3923048454, -6), (-11.5415832454, -6.8772705646), (-14.0540805975, -8.7951174246), (-17.7301047401, -15.7764802864), (-17.0460236746, -16.8722201681)],
                knots=[0, 0, 0, 0, 0.2244243513, 0.4906257599, 0.4906257599, 0.4906257599, 0.4906257599], degree=3))
            Line((-17.0460236746, -16.8722201681), (-16.9705627437, -16.9705627678))
            Line((-16.9705627437, -16.9705627678), (-16.8124081104, -17.0919191033))
        make_face()
        with BuildLine():
            ThreePointArc((-11.5016563593, -3.4222654765), (-11.9958792367, -0.3144540322), (-11.6651564764, 2.8149821281))
            add(Edge.make_bspline(
                [(-11.5016563593, -3.4222654765), (-12.9115656206, -3.6370683177), (-16.0934458137, -4.0981863914), (-27.9807827448, -0.6079790505), (-16.6428417959, 3.1311619375), (-13.2845908531, 2.9264195891), (-11.6651564764, 2.8149821281)],
                knots=[0.0036068808, 0.0036068808, 0.0036068808, 0.0036068808, 0.2249823253, 0.5005363381, 0.7662873964, 1, 1, 1, 1], degree=3))
        make_face()
    extrude(amount=F1_DEPTH)

    # F2 (on Top) → F3 (cut)
    with BuildSketch(Plane.XY):
        Circle(F2_R)
    extrude(amount=F3_DEPTH, mode=Mode.SUBTRACT)


solid = f1.part
